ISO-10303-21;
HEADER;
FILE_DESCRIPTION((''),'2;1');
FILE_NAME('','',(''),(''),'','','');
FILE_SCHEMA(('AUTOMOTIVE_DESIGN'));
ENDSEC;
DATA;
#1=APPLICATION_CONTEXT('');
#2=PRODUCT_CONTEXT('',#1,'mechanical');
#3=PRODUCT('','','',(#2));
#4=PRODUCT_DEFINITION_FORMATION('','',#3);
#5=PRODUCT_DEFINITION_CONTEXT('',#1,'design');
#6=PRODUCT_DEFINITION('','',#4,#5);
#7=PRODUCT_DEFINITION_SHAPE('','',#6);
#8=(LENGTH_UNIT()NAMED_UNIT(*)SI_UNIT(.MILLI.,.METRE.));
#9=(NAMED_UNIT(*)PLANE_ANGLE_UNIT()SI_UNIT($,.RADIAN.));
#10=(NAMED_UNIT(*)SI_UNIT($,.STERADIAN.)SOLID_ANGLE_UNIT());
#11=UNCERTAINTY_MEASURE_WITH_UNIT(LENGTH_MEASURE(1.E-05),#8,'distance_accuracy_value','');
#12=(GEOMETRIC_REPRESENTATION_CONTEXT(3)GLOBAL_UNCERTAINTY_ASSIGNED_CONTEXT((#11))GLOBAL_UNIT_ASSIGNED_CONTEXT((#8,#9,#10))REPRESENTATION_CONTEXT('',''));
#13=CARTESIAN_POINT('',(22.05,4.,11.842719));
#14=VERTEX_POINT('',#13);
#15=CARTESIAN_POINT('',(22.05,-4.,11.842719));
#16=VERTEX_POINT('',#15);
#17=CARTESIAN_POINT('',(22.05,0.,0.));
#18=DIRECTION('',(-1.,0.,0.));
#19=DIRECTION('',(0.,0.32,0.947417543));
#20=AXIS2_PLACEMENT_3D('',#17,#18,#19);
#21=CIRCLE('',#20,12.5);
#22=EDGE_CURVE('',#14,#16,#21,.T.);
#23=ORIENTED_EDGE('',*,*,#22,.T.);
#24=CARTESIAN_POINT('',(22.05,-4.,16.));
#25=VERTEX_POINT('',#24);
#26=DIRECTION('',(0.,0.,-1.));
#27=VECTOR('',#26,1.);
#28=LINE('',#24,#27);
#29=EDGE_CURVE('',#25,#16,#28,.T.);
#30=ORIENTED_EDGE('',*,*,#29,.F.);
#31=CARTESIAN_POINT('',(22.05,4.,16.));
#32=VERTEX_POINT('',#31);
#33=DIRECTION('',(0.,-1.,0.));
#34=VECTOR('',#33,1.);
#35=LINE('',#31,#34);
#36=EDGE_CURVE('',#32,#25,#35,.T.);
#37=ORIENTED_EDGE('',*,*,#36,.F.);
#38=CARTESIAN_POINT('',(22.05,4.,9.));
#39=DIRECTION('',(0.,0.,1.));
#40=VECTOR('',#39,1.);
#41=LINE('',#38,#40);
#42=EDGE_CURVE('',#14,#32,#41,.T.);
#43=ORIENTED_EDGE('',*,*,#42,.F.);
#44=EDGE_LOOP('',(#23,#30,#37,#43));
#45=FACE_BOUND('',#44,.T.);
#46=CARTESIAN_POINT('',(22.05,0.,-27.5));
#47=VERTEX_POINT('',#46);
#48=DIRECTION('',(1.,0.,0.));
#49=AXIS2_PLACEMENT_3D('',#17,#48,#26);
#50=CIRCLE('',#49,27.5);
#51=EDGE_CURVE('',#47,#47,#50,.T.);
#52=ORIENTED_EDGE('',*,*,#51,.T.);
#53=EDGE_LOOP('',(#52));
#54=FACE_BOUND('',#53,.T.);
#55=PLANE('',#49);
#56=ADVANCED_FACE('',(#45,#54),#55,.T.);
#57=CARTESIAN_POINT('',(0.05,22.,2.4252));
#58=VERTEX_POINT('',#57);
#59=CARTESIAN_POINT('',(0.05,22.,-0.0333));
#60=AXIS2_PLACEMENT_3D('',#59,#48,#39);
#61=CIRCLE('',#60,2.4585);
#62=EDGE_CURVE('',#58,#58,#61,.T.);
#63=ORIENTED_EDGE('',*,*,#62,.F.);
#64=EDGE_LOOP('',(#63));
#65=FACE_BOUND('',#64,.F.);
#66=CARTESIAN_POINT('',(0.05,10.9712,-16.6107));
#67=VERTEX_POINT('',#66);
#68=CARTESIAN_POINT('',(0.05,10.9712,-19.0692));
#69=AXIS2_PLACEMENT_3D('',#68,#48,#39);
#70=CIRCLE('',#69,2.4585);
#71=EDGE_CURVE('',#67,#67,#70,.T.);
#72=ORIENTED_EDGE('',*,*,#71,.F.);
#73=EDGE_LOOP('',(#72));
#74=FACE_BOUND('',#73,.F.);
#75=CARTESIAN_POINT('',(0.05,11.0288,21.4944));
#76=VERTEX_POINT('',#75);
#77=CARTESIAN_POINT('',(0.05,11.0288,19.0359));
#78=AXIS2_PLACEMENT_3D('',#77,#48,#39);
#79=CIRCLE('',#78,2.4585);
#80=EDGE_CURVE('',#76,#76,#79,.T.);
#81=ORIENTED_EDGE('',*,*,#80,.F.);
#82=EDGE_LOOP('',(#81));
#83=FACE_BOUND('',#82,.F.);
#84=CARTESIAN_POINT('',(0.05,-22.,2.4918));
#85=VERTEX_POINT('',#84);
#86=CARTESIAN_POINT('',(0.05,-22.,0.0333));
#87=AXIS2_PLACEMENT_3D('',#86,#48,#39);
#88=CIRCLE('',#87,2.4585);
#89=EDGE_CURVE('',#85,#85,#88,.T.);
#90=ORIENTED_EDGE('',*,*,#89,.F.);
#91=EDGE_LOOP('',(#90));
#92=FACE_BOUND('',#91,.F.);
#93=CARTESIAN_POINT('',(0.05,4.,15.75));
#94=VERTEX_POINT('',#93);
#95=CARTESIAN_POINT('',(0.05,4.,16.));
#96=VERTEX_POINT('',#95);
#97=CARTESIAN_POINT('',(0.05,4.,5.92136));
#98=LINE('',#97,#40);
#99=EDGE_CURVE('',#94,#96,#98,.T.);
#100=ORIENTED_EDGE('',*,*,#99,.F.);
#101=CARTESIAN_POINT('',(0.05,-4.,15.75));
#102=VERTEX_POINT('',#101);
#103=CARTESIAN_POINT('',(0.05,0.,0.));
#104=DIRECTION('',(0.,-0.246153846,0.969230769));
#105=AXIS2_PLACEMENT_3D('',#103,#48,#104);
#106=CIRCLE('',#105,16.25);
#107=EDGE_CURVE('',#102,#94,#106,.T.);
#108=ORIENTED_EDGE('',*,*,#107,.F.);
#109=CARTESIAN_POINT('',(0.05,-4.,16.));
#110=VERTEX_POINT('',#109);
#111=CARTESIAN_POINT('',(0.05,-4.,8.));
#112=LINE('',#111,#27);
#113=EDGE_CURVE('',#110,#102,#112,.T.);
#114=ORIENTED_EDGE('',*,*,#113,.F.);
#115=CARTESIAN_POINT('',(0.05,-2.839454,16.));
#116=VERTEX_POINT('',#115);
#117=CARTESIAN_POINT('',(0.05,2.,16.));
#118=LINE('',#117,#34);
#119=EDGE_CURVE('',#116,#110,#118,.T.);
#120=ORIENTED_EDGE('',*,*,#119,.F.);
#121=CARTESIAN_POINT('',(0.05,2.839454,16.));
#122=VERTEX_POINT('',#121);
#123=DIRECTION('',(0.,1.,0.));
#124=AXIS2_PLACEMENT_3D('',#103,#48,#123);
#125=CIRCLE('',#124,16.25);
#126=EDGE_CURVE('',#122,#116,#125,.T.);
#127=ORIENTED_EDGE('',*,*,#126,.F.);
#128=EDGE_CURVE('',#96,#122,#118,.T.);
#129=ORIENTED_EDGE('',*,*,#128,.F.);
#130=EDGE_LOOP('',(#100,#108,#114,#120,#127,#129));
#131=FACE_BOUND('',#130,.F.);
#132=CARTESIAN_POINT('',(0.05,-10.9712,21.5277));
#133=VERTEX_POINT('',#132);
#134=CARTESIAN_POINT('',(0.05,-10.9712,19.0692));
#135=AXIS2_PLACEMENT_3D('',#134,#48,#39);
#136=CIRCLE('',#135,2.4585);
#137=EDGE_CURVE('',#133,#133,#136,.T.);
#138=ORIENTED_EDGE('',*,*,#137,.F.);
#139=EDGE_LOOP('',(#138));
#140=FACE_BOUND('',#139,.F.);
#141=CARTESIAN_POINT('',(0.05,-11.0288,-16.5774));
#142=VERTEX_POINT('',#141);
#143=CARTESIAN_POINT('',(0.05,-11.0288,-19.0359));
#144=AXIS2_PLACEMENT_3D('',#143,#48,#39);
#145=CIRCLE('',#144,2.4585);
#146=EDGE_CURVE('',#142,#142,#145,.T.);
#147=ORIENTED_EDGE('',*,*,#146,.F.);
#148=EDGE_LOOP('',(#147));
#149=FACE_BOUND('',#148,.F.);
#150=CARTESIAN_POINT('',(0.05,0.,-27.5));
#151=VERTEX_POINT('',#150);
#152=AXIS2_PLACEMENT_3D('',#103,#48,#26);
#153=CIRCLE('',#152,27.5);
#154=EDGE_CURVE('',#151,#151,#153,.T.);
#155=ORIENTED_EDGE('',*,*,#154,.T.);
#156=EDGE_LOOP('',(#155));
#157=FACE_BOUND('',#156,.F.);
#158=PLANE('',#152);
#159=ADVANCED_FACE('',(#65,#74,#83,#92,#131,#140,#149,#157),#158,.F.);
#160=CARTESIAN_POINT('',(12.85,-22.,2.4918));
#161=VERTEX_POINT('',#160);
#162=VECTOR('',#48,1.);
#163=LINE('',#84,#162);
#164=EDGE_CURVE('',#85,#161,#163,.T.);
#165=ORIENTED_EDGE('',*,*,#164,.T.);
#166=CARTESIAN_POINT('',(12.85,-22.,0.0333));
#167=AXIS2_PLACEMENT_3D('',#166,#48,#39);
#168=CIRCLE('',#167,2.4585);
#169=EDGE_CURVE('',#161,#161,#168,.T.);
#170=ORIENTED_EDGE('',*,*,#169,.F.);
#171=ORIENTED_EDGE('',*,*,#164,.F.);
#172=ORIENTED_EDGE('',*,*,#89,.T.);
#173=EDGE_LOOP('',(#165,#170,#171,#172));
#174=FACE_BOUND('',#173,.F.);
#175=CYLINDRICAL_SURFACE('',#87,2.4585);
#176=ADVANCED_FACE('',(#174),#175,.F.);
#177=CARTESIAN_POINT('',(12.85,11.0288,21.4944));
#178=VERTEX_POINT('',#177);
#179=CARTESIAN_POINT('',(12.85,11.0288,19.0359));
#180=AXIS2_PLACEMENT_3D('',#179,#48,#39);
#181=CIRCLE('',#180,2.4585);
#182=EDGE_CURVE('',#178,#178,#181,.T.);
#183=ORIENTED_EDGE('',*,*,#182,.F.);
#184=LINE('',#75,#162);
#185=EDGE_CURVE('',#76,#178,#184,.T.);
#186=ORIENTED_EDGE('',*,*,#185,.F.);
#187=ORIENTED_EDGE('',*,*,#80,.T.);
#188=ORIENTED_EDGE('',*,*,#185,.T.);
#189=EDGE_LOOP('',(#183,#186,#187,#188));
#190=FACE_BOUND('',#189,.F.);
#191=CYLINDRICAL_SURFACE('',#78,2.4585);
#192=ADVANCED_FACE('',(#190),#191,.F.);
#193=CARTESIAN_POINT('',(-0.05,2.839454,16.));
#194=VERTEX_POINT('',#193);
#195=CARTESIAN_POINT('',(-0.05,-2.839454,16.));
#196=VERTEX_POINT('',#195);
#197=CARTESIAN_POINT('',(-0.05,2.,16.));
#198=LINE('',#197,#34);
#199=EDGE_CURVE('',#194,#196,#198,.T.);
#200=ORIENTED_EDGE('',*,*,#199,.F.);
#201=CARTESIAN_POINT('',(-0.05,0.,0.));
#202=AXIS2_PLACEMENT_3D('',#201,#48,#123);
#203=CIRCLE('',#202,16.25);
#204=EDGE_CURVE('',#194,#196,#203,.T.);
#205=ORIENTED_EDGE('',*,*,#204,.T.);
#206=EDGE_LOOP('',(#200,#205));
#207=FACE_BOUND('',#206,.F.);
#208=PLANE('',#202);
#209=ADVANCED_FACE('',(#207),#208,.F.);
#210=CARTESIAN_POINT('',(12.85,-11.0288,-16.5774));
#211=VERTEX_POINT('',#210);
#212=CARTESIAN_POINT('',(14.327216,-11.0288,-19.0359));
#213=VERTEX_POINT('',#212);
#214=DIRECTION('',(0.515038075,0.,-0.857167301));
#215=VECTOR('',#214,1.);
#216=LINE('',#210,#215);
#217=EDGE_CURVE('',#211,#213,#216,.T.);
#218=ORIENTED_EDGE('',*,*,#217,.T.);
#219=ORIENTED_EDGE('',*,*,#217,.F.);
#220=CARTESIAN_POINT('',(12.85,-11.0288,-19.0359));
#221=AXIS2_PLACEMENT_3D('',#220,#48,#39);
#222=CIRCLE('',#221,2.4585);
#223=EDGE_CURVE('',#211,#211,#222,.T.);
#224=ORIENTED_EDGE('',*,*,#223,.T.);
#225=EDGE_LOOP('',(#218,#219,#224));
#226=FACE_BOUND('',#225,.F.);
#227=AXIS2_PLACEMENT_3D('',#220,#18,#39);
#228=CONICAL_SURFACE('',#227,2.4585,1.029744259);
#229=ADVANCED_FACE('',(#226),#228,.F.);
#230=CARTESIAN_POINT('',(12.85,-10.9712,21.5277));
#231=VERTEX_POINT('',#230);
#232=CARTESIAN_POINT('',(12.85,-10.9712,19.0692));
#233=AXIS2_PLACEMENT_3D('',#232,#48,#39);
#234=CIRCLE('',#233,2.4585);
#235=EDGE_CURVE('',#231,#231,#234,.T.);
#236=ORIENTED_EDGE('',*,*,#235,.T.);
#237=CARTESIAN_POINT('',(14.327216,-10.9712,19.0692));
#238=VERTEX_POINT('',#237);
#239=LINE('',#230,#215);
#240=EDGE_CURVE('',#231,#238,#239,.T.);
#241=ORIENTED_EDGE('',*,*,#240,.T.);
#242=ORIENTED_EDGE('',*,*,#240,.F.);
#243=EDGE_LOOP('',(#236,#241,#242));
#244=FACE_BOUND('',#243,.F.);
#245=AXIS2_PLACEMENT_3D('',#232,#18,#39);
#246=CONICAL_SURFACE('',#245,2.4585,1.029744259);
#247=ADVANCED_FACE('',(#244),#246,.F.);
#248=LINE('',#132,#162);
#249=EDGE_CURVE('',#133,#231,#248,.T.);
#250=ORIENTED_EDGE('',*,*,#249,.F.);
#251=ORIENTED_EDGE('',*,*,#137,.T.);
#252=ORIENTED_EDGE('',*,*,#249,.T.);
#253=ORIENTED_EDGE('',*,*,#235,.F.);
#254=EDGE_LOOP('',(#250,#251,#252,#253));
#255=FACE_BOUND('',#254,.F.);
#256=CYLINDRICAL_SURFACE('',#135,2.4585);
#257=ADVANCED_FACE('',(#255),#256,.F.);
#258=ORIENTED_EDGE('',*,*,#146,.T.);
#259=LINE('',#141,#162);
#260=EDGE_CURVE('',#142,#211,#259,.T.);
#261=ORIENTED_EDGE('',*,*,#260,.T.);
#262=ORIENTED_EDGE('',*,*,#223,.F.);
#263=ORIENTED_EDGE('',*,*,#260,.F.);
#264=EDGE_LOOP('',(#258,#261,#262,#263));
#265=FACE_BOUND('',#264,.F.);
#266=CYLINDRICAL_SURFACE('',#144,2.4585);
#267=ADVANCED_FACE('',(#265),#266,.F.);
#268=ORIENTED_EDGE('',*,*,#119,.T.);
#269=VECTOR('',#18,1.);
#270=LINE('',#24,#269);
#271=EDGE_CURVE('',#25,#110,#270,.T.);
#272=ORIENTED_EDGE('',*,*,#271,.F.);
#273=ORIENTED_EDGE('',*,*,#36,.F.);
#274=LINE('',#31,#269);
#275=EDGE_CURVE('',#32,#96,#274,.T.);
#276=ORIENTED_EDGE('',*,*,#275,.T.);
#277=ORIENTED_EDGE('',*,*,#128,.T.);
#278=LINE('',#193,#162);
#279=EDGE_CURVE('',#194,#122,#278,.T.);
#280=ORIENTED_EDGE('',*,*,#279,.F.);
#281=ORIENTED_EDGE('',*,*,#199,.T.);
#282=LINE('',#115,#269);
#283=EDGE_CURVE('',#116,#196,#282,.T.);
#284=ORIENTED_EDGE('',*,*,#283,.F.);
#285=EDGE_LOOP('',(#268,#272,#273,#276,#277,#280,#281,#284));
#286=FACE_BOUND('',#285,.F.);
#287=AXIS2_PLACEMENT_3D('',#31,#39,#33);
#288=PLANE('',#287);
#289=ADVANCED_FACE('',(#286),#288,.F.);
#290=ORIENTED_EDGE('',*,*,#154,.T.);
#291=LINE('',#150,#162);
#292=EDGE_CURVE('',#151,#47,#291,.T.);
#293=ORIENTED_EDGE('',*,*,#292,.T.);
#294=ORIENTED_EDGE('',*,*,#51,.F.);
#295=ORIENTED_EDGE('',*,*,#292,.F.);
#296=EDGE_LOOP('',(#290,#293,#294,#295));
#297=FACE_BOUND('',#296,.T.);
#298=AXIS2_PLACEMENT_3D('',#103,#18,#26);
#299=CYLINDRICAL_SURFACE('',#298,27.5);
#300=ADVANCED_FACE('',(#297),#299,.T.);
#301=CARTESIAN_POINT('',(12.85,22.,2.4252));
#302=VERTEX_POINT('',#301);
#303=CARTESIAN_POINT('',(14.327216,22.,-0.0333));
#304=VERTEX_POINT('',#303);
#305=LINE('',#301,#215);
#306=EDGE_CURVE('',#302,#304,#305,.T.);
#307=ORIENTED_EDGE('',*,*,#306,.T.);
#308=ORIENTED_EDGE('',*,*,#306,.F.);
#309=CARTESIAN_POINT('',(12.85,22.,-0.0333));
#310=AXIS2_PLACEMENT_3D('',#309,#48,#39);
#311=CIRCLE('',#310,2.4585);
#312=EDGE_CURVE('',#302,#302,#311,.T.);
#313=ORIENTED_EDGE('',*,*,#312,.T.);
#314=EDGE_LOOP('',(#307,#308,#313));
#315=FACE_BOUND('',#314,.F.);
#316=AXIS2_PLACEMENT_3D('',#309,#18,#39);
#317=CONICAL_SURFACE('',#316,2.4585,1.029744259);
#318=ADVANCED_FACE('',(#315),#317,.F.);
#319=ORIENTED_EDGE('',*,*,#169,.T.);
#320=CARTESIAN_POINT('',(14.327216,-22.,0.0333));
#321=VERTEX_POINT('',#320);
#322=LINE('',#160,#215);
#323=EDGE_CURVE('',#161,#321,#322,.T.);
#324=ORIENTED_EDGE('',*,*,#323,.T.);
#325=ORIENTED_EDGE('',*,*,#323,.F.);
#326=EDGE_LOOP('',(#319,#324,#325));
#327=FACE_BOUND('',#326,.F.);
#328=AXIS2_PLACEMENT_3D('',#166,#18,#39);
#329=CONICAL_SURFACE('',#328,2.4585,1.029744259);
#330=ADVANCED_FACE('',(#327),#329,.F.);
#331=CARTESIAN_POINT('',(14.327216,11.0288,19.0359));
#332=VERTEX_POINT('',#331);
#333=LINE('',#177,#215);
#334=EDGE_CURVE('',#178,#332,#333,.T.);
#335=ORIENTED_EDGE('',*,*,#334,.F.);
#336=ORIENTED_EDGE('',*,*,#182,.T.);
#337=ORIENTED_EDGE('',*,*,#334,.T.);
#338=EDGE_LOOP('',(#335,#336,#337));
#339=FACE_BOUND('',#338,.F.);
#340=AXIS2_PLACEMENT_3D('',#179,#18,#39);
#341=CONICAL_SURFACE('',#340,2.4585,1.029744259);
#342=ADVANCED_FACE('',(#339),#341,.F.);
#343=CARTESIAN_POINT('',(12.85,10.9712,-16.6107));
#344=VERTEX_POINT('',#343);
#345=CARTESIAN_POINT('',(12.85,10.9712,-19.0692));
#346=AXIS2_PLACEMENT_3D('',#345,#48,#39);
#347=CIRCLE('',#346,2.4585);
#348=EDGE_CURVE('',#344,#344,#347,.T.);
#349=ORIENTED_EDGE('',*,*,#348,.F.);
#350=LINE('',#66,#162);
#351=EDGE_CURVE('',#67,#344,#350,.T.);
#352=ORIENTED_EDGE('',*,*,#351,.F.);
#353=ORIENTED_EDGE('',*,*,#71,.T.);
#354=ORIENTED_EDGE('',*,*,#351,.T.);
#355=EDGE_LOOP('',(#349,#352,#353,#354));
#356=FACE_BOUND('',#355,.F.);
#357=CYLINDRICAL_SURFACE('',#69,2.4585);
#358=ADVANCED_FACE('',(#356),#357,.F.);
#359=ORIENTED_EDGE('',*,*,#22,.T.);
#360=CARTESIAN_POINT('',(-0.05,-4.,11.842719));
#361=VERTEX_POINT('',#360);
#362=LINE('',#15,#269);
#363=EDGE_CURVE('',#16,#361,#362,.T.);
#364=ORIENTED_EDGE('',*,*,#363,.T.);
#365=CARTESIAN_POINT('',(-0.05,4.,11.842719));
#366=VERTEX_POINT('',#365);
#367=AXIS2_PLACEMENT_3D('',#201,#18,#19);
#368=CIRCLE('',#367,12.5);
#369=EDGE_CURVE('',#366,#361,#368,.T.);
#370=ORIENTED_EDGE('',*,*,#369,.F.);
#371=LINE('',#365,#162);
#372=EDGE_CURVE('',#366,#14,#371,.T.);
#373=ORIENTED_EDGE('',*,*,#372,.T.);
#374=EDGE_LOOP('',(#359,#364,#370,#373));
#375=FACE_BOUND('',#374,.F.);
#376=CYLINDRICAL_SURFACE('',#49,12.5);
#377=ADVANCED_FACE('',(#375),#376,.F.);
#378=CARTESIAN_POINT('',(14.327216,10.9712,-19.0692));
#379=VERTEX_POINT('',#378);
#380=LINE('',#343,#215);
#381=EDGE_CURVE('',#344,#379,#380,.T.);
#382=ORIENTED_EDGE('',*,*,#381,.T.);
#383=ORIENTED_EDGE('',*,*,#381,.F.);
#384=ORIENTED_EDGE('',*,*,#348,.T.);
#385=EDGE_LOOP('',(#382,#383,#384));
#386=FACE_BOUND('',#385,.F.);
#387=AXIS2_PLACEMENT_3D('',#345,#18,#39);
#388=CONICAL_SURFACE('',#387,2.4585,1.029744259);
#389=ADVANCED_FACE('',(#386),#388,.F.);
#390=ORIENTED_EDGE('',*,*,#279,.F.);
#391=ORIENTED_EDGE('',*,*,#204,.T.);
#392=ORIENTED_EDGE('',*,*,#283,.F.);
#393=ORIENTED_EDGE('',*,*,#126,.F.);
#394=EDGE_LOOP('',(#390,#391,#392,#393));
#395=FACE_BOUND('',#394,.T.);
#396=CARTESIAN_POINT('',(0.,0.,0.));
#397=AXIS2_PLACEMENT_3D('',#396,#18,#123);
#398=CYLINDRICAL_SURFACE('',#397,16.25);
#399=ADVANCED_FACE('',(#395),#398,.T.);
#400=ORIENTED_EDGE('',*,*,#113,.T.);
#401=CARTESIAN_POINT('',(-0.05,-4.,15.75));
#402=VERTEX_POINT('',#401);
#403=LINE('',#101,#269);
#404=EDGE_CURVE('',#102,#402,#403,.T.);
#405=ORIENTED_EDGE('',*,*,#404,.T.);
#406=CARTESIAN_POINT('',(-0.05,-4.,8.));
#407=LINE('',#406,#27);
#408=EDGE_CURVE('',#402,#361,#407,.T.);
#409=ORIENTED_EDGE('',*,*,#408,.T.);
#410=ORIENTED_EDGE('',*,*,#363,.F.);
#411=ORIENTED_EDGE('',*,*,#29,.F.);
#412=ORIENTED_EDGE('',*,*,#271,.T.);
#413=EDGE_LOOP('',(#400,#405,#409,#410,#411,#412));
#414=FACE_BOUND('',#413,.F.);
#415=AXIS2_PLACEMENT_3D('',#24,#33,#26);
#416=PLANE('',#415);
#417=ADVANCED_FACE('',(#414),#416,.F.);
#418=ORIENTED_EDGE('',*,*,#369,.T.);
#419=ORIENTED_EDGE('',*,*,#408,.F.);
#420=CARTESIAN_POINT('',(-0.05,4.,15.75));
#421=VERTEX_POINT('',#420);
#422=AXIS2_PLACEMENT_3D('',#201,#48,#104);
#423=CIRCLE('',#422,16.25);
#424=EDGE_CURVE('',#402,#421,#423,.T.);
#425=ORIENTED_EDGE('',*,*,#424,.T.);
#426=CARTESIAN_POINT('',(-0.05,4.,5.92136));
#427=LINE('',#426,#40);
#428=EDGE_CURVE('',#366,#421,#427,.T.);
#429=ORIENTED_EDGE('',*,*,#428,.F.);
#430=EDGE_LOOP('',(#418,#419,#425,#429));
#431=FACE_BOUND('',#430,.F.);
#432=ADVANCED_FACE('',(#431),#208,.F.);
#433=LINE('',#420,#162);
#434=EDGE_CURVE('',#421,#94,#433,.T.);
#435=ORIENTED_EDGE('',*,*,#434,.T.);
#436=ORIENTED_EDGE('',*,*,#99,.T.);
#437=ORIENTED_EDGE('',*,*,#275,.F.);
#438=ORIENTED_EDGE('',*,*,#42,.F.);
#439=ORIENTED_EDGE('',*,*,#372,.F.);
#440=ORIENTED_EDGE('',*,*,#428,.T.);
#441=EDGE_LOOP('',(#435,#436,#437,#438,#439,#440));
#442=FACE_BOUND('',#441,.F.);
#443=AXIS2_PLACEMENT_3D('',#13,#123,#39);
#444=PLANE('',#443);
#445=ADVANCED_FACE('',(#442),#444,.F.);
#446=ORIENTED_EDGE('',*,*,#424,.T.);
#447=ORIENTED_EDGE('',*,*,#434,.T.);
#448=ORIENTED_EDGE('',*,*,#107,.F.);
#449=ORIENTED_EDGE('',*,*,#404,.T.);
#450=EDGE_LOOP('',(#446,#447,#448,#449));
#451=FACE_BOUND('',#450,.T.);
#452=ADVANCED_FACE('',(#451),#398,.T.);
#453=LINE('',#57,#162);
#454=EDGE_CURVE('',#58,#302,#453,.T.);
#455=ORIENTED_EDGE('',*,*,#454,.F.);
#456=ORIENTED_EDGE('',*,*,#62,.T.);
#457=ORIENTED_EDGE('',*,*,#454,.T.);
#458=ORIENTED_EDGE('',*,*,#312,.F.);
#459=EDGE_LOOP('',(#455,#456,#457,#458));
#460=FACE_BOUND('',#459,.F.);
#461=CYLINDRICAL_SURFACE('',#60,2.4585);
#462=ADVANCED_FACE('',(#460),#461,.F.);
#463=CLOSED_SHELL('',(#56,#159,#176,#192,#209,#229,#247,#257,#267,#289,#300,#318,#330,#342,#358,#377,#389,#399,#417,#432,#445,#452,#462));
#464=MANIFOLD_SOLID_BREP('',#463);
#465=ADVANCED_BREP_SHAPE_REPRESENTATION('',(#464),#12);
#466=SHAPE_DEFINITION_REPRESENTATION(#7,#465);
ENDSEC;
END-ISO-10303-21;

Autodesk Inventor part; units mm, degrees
ref_plane "YZ Plane" through (0, 0, 0) normal (1, 0, 0) x (0, 1, 0)
ref_plane "XZ Plane" through (0, 0, 0) normal (0, 1, 0) x (-1, 0, 0)
ref_plane "XY Plane" through (0, 0, 0) normal (0, 0, 1) x (1, 0, 0)
sketch "Skizze1" plane through (0, 0, 0) normal (1, 0, 0) x (0, 1, 0)
  circle A0 centre (0, 0) radius 12.5
  circle A1 centre (0, 0) radius 16.25
  dimension "d0" = 25
  dimension "d1" = 32.5
extrude "Extrusion1" add sketch "Skizze1" along normal mid plane 0.1
sketch "Skizze2" plane through (0.05, 0, 0) normal (1, 0, 0) x (0, 0, -1)
  circle A0 centre (0, 0) radius 27.5
  dimension "d5" = 55
extrude "Extrusion2" add sketch "Skizze2" along normal blind 22
sketch "Skizze4" plane through (22.05, 0, 0) normal (1, 0, 0) x (0, 0, -1)
  circle A0 centre (0, 0) radius 12.5
  dimension "d8" = 25
extrude "Extrusion3" cut sketch "Skizze4" against normal blind 30
sketch "Skizze5" plane through (0.05, 0, 0) normal (-1, 0, 0) x (0, 0, 1)
  point P0 (0, 0)
  point P1 (0.0333, -22)
  point P2 (19.0692, -10.9712)
  point P3 (19.0359, 11.0288)
  point P4 (-0.0333, 22)
  point P5 (-19.0692, 10.9712)
  point P6 (-19.0359, -11.0288)
  dimension "d18" = 22
  dimension "d21" = 360
hole "Bohrung1" at (0.05, -22, 0.0333) at (0.05, -10.9712, 19.0692) at (0.05, 11.0288, 19.0359) at (0.05, 22, -0.0333) at (0.05, 10.9712, -19.0692) at (0.05, -11.0288, -19.0359) direction (1, 0, 0) diameter 4.917 depth 12.8 tip angle 118 thread size "M6x1" class "6H" standard "ISO Metric profile"
sketch "Skizze6" plane through (22.05, 0, 0) normal (1, 0, 0) x (0, 0, -1)
  line L0 (-16, -4) -> (-9, -4)
  line L1 (-9, -4) -> (-9, 4)
  line L2 (-9, 4) -> (-16, 4)
  line L3 (-16, 4) -> (-16, -4)
  circle A0 centre (0, 0) radius 12.5 projected
  line L4 (-16, -4) -> (-9, 4) construction
  line L5 (-9, -4) -> (-16, 4) construction
  point P0 (-12.5, 0)
  point P1 (-11.8427, -4)
  point P2 (-11.8427, 4)
  dimension "d23" = 7
  dimension "d24" = 8
  dimension "d25" = 9
extrude "Extrusion4" cut sketch "Skizze6" against normal blind 52 contours L3 L2 A0 L0
properties part number "Befestigung bremsscheibe"
